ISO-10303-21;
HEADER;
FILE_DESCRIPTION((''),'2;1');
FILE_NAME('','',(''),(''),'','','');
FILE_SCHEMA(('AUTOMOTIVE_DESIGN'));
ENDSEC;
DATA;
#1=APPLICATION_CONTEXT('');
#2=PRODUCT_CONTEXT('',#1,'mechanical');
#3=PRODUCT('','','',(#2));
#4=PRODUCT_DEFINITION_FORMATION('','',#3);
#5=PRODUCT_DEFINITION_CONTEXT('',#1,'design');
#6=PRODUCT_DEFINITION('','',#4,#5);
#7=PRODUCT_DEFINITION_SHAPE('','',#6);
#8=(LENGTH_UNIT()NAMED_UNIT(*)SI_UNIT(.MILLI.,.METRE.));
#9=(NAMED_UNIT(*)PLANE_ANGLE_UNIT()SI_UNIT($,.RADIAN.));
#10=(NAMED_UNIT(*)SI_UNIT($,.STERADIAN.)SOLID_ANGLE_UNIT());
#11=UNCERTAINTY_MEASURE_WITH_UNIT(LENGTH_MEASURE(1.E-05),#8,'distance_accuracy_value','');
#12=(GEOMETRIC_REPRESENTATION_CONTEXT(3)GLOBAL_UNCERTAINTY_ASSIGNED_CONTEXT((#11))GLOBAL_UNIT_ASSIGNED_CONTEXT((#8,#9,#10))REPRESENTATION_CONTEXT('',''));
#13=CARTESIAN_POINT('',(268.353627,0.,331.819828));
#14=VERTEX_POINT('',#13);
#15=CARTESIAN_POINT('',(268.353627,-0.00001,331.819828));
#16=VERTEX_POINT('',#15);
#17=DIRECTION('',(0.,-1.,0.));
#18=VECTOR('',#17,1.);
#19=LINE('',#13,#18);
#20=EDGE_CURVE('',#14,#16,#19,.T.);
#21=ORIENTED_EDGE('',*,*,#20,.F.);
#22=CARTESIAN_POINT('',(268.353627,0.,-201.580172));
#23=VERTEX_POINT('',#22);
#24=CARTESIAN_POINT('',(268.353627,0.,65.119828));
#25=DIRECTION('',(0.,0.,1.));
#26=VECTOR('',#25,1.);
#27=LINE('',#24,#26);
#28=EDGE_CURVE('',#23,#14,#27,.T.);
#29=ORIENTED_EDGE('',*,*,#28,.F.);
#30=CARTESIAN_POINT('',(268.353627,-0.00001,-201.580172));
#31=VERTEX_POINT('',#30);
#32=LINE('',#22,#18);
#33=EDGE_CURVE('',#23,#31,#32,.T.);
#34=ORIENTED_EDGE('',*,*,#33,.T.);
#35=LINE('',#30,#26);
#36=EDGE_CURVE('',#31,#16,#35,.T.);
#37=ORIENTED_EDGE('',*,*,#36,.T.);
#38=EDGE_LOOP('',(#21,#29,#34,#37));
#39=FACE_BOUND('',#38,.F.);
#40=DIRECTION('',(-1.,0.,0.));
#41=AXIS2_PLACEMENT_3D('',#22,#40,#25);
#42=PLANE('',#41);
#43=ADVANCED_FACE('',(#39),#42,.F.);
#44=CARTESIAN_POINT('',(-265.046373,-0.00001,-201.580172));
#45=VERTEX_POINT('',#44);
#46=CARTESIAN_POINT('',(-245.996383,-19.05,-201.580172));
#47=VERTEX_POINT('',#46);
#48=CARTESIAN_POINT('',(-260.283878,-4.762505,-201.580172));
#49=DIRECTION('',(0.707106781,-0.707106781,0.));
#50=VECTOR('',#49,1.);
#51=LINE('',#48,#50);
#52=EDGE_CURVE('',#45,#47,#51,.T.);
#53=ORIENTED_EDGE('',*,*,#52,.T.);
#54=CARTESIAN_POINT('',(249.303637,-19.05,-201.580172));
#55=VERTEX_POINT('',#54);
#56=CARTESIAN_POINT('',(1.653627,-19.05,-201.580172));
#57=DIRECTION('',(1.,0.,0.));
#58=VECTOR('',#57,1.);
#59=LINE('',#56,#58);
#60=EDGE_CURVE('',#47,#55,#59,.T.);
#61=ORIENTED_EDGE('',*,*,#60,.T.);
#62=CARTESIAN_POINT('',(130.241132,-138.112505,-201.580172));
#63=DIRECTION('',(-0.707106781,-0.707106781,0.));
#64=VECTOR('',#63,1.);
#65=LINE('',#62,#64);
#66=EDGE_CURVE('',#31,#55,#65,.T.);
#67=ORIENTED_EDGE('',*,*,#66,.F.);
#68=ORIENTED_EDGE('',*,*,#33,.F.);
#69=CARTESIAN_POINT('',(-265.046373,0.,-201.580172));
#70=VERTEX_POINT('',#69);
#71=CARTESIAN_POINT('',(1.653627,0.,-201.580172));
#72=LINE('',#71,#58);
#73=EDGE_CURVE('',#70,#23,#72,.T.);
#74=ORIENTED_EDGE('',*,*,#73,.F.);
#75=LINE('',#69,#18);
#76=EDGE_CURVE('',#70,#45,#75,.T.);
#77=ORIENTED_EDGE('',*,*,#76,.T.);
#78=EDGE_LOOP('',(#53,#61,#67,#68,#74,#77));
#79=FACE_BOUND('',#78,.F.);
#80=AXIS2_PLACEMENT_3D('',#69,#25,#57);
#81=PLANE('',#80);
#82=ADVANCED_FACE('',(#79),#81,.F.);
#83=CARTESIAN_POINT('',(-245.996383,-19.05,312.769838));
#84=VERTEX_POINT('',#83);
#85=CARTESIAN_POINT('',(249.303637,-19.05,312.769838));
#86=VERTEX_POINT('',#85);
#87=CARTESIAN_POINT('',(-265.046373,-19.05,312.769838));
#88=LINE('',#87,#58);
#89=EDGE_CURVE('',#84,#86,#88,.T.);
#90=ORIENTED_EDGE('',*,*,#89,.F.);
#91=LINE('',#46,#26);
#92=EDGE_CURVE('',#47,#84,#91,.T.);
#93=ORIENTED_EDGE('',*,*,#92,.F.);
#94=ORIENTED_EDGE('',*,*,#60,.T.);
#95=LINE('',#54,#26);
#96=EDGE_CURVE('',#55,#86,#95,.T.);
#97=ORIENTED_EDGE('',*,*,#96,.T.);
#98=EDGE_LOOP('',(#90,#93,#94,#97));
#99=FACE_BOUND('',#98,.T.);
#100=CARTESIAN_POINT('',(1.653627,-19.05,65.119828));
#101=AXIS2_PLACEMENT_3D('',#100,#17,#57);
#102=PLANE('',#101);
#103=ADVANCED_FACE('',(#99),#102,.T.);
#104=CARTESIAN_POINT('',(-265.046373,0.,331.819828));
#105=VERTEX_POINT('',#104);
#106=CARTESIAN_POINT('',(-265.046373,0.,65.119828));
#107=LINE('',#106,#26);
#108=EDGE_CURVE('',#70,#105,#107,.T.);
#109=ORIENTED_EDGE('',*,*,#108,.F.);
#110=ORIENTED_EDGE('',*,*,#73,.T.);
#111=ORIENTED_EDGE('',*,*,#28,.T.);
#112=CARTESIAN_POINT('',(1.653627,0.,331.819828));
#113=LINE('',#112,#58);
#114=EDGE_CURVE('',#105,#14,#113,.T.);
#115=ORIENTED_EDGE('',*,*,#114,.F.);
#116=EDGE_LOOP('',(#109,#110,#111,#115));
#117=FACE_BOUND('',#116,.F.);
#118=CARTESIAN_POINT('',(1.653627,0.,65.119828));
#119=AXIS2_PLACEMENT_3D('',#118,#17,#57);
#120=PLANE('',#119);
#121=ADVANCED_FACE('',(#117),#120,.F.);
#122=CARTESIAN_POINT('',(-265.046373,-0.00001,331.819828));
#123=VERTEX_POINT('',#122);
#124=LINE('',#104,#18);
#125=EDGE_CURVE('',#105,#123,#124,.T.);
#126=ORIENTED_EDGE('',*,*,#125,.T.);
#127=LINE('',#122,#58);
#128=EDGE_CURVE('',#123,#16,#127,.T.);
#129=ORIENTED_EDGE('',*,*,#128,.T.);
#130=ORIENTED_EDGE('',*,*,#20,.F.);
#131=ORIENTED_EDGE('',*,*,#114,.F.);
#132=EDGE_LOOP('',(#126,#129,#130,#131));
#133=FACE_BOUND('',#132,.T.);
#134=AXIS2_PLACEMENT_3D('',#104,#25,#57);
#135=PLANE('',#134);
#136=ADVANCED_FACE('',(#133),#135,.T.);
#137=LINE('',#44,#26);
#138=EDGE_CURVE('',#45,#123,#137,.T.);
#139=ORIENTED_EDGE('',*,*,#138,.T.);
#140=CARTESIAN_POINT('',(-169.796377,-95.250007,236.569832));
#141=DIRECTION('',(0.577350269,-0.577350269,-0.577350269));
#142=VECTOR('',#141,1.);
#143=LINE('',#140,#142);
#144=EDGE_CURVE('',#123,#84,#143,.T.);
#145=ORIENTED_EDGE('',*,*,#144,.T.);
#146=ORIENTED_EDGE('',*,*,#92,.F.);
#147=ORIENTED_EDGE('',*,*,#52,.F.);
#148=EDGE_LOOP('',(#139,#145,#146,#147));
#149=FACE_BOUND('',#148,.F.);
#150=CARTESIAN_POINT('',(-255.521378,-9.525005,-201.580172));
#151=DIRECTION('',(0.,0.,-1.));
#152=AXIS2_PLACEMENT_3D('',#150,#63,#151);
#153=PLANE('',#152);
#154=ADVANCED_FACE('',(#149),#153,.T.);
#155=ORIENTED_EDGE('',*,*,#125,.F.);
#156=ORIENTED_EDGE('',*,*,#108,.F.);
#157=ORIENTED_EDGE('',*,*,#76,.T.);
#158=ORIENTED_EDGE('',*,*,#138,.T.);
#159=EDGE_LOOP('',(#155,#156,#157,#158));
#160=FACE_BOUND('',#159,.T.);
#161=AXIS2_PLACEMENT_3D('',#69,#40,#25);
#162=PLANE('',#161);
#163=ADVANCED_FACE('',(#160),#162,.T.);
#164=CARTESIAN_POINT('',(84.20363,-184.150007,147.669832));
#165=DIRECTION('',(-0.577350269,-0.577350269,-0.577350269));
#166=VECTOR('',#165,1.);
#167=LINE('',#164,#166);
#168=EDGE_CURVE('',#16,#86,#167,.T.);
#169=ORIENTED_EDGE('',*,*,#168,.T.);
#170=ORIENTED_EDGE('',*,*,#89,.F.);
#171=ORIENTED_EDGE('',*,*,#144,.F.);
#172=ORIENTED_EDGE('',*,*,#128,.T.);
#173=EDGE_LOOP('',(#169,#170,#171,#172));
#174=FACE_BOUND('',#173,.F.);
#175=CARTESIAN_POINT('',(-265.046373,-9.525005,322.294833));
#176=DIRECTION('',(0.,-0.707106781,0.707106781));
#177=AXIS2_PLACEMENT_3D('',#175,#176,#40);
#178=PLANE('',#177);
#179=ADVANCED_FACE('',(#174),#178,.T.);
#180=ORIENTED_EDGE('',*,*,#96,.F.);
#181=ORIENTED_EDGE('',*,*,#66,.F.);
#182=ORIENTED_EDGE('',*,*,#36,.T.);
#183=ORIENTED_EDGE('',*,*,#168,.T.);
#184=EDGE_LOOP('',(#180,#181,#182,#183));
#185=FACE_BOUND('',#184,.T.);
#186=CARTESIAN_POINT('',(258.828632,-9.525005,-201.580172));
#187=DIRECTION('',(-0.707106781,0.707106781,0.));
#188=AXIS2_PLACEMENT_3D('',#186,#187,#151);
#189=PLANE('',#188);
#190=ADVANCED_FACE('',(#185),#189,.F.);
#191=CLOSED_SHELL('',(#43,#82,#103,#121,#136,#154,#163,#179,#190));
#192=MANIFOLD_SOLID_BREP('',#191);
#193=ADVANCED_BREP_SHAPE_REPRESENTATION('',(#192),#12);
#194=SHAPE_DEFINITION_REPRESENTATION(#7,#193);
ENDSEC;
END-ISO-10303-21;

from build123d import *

# Parameters (mm, degrees)
F0_W     = 533.4
F0_H     = 533.4
F1_DEPTH = 19.05
F2_SIZE  = 19.04999


# Not quite as in the source:
# - a fillet or chamfer is up to 0.001 mm smaller than in the source, because OpenCascade refuses the exact size


with BuildPart() as f1:
    # F0 (on Front) → F1 (new body)
    with BuildSketch(Plane.XZ):
        with Locations((1.6536265612, 65.1198284748)):
            Rectangle(F0_W, F0_H)
    extrude(amount=F1_DEPTH)

    # F2 (size 19.05 in the source; OpenCascade refuses exactly that, so slightly less here)
    f2_edges = [f1.edges().sort_by_distance(p)[0] for p in [
        (1.653627, -19.05, 331.819828),
        (-265.046373, -19.05, 65.119828),
        (268.353627, -19.05, 65.119828),
    ]]
    chamfer(f2_edges, length=F2_SIZE)


solid = f1.part
